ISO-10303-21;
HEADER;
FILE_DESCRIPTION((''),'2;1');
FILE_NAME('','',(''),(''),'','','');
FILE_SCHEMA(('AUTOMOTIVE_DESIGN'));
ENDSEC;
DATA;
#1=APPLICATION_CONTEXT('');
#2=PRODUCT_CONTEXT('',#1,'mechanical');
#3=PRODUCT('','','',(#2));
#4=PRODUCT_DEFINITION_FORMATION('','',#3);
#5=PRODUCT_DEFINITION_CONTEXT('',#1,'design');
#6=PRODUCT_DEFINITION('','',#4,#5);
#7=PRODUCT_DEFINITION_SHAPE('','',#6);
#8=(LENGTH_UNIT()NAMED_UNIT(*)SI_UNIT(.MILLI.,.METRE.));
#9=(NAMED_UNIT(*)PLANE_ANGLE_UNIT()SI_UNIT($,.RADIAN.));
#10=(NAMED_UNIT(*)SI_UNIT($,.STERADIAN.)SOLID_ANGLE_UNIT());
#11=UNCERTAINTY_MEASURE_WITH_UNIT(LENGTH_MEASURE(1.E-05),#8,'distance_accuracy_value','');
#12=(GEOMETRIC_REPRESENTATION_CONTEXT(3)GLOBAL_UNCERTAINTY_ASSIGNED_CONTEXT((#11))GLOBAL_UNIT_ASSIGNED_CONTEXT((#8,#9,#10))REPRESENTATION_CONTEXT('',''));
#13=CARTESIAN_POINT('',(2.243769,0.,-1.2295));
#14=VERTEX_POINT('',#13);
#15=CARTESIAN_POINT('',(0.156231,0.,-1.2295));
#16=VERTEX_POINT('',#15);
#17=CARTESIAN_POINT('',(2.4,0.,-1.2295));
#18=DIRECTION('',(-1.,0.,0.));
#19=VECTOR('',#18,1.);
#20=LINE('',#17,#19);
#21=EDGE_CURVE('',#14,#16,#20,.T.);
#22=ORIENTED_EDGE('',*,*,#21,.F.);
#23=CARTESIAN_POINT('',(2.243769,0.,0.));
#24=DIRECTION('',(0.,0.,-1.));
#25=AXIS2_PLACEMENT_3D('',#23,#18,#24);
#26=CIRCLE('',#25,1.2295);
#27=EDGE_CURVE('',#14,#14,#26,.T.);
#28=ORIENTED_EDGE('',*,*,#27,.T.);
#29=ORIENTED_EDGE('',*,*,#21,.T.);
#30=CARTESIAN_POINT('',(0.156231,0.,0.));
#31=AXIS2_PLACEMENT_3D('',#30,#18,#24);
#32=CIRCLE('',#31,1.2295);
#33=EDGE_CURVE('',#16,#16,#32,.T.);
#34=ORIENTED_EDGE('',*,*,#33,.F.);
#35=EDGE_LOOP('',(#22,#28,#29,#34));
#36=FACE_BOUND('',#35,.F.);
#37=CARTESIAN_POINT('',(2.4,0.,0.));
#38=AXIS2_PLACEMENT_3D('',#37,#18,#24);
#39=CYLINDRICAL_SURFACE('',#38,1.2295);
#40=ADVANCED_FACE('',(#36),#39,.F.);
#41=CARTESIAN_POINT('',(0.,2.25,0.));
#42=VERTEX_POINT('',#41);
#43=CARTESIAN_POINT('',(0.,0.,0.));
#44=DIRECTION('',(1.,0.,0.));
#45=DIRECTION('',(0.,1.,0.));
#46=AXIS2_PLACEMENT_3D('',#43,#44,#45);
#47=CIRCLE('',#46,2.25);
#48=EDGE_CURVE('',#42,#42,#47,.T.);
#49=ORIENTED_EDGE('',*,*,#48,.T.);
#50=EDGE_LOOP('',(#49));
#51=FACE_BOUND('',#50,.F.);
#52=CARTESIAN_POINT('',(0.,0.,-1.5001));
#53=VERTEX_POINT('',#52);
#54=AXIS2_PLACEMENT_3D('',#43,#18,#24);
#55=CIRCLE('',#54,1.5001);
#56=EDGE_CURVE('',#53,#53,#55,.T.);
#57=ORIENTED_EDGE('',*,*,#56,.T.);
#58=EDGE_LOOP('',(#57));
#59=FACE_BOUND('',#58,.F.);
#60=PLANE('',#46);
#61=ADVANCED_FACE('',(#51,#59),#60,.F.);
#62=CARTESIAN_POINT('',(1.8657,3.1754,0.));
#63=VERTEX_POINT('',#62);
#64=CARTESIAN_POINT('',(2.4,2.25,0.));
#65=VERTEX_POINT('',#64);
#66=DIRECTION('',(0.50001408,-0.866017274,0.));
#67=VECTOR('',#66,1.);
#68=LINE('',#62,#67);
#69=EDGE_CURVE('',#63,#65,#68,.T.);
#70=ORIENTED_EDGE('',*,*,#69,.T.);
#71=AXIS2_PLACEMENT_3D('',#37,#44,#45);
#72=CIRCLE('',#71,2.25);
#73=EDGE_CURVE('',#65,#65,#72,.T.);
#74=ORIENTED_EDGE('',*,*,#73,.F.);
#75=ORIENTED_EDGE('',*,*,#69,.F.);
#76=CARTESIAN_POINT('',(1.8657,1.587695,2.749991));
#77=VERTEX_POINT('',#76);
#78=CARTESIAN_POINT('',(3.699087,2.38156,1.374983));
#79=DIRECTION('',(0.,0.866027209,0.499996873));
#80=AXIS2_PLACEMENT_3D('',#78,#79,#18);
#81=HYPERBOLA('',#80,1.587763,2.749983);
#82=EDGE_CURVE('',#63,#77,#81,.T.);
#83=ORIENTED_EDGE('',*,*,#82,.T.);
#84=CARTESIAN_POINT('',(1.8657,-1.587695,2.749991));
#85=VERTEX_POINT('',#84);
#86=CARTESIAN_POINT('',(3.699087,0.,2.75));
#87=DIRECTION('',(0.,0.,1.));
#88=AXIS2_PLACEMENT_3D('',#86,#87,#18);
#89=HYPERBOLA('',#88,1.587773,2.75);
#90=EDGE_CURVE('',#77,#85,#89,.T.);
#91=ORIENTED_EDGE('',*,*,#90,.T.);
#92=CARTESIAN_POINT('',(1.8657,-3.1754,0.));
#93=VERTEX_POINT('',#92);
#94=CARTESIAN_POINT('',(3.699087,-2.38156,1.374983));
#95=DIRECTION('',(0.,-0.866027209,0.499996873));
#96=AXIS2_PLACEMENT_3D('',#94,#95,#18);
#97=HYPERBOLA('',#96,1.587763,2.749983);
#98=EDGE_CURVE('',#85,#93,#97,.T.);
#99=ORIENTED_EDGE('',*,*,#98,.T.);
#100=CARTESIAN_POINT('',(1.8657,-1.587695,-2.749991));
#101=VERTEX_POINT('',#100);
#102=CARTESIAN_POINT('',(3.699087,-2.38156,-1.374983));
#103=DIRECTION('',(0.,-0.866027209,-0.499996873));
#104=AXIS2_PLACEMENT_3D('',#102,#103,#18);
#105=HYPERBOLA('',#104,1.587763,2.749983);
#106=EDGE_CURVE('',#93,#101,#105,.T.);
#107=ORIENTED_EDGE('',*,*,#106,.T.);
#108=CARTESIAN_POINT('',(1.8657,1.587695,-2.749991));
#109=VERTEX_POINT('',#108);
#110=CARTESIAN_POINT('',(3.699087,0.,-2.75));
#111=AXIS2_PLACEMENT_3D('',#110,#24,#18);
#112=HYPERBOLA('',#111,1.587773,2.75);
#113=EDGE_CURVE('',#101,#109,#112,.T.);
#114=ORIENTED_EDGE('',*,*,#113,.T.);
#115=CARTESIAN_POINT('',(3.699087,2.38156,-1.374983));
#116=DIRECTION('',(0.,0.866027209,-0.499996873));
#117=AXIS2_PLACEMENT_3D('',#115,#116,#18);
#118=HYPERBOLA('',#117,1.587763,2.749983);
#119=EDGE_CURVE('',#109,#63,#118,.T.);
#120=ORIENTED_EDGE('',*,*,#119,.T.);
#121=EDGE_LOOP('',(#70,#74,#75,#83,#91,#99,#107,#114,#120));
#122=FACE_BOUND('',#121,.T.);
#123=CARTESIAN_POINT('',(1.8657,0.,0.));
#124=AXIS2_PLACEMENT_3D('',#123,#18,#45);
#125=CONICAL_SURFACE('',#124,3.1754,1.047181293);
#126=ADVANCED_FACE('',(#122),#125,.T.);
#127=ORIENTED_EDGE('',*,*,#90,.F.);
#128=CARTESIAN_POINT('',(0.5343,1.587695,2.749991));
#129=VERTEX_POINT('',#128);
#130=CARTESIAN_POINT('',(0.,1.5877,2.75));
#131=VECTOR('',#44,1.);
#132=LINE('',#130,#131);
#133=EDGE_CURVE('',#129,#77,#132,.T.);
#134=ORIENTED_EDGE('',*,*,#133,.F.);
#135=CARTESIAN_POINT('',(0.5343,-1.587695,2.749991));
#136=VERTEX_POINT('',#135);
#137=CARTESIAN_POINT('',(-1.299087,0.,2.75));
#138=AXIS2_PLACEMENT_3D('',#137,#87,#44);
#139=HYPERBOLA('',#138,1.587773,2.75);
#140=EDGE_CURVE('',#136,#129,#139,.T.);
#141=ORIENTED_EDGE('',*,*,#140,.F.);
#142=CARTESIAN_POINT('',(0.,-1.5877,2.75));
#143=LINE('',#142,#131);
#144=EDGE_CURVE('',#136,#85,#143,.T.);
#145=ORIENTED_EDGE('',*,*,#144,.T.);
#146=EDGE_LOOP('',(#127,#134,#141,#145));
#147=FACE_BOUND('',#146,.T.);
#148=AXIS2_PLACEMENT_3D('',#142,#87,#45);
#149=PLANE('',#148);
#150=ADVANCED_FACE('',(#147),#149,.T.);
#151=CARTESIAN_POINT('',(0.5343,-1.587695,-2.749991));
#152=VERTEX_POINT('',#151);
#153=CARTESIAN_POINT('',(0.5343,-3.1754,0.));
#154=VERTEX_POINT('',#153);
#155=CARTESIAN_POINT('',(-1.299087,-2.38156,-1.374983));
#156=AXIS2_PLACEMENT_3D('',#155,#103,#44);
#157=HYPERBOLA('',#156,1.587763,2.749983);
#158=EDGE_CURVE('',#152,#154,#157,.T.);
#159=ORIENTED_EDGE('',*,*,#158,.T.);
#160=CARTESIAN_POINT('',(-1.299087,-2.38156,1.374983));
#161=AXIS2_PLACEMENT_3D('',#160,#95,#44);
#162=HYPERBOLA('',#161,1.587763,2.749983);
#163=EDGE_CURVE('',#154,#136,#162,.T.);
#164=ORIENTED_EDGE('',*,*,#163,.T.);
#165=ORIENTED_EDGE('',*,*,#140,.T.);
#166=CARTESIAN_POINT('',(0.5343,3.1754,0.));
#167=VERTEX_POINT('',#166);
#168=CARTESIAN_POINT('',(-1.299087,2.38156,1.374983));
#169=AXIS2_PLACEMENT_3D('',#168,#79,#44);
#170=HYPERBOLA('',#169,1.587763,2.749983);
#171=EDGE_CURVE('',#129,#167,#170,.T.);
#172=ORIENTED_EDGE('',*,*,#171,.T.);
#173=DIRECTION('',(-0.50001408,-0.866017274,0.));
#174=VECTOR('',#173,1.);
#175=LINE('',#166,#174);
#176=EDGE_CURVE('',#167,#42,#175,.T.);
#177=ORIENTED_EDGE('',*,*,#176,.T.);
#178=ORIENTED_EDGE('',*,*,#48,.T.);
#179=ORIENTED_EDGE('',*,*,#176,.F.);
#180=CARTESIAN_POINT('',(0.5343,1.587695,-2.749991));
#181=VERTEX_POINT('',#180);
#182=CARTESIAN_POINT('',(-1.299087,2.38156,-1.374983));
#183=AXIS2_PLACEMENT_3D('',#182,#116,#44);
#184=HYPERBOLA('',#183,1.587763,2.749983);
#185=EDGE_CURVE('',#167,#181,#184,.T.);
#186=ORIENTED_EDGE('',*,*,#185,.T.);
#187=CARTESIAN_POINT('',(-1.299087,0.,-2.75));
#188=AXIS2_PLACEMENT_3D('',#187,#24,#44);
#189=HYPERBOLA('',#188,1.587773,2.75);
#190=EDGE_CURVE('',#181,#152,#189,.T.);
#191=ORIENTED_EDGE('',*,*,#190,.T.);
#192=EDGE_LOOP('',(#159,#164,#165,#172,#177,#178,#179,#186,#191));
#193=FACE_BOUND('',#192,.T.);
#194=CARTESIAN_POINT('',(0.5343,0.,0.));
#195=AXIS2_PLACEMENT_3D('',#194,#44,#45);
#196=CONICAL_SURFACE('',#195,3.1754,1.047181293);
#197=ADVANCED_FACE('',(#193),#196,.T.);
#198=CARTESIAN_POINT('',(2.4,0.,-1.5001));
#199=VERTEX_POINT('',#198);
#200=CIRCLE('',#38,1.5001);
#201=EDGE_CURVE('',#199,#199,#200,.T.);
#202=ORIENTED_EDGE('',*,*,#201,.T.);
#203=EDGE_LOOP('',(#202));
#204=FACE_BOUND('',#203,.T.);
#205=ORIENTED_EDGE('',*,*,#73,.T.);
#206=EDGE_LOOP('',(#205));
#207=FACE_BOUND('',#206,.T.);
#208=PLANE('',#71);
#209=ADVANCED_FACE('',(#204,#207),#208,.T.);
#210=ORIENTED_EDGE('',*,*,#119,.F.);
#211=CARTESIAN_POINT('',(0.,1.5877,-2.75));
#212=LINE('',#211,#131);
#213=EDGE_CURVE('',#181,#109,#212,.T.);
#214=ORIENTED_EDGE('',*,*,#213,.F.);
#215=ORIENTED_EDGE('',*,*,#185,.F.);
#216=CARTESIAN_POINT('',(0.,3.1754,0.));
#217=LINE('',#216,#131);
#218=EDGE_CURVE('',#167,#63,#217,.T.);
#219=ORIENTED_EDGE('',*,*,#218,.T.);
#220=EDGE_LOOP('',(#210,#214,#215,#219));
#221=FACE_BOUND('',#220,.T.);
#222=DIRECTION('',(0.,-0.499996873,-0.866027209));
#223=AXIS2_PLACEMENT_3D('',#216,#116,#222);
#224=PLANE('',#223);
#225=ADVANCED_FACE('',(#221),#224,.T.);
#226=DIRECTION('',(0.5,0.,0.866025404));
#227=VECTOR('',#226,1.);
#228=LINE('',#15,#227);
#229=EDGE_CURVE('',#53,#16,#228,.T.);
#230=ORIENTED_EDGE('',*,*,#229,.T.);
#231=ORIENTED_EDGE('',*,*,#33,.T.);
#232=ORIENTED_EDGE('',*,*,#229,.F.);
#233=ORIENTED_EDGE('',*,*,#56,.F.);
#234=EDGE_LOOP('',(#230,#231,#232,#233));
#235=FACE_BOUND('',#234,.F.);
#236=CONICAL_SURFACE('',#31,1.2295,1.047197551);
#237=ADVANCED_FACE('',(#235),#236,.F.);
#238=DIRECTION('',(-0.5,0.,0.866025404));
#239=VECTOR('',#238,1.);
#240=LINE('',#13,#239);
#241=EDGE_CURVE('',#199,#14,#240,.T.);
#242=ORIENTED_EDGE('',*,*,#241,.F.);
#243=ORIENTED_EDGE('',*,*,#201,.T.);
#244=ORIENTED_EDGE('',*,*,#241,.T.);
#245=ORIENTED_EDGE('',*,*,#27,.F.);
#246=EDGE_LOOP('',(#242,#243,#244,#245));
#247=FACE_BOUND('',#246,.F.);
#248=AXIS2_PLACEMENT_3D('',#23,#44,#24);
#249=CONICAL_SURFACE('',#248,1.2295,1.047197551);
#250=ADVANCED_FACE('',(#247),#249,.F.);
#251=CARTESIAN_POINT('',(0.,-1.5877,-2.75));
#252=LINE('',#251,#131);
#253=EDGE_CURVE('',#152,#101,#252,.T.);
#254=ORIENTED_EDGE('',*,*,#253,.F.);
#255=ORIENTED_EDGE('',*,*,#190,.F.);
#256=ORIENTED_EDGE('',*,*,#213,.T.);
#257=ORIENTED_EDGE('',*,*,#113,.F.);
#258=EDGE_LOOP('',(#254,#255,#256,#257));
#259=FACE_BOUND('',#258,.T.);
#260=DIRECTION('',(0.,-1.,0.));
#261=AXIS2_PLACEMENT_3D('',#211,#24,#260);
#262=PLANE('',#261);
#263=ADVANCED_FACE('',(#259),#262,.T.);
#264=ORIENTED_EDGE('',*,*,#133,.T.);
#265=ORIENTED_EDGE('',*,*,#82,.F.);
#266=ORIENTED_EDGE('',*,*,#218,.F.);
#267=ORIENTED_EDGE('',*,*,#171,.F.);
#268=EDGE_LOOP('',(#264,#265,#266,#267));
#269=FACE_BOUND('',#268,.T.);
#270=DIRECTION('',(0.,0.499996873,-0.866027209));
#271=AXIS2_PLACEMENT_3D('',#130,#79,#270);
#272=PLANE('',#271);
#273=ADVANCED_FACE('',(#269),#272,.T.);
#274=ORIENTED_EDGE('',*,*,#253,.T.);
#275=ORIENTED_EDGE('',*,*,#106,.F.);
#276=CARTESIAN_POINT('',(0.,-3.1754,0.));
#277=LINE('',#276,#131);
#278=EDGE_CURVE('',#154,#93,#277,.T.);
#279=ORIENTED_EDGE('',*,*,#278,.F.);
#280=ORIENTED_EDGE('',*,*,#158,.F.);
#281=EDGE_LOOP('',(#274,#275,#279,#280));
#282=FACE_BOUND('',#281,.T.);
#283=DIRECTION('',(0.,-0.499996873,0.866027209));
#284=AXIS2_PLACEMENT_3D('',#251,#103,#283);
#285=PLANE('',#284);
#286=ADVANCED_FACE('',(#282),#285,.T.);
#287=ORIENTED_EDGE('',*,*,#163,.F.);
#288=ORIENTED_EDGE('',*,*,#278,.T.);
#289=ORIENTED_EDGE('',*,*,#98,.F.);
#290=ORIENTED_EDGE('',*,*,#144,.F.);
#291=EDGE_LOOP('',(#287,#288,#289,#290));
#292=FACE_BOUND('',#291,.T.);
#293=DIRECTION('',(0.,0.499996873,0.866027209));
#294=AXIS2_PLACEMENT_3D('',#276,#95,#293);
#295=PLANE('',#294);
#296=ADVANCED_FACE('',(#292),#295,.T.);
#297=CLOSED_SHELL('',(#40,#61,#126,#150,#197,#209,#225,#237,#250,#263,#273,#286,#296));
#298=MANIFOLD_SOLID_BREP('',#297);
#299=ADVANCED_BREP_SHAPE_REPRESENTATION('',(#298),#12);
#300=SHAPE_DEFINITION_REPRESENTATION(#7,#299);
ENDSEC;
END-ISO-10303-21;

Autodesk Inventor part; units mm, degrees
ref_plane "YZ Plane" through (0, 0, 0) normal (1, 0, 0) x (0, 1, 0)
ref_plane "XZ Plane" through (0, 0, 0) normal (0, 1, 0) x (-1, 0, 0)
sketch "Náčrt1" plane through (0, 0, 0) normal (1, 0, 0) x (0, 1, 0)
  line L0 (-3.1754, 0) -> (-1.5877, 2.75)
  line L1 (-1.5877, 2.75) -> (1.5877, 2.75)
  line L2 (1.5877, 2.75) -> (3.1754, 0)
  line L3 (3.1754, 0) -> (1.5877, -2.75)
  line L4 (1.5877, -2.75) -> (-1.5877, -2.75)
  line L5 (-1.5877, -2.75) -> (-3.1754, 0)
  point P0 (0, 0)
  point P1 (0, 0)
  dimension "d0" = 6.3509
extrude "Těleso" add sketch "Náčrt1" along normal blind 2.4
sketch "Náčrt2" plane through (0, 0, 0) normal (0, 0, 1) x (1, 0, 0)
  line L0 (0, 1.5877) -> (0, 3.1754) projected
  line L1 (0, 3.1754) -> (2.4, 3.1754) projected
  line L2 (2.4, 1.5877) -> (2.4, 3.1754) projected
  line L3 (-0.48, 0) -> (2.88, 0) projected
  line L4 (0.5343, 3.1754) -> (0, 2.25)
  line L5 (1.8657, 3.1754) -> (2.4, 2.25)
  dimension "d3" = 30
  dimension "d4" = 30
  dimension "d5" = 4.5
  dimension "d6" = 4.5
revolve "Zkosení1" cut sketch "Náčrt2" angle 360 about axis through (-10, 0, 0) along (1, 0, 0)
sketch "Náčrt3" plane through (2.4, 0, 0) normal (1, 0, 0) x (0, 0, -1)
  arc A0 (-0.625, -1.0825) -> (0.625, -1.0825) centre (0, 0) ccw projected
hole "Závit" at (2.4, 0, 0) direction (-1, 0, 0) diameter 2.459 end through all thread size "M3x0.5" class "6H" standard "ISO Metric profile"
chamfer "Zkosení2" distance 0.2706 angle 30 1 edges at (2.4, 0, 1.2295) measured on face at (2.4, 1.8851, -0.2289)
chamfer "Zkosení3" distance 0.2706 angle 30 1 edges at (0, 0, 1.2295) measured on face at (0, 1.8851, -0.2289)
ref_plane "Work Plane1" through (-6.3375, 0, 0) normal (0, -0.8660254, -0.5) x (1, 0, 0)
equation "\"d0\" = 1.1547 * SW"
equation "\"d1\" = KOH"
equation "\"d8\" = -0.5 * GD1 + 0.5 * NND"
equation "\"d40\" = -0.5 * GD1 + 0.5 * NND"
equation "\"d10\" = -0.5 * GD1 + 0.5 * NND"
equation "\"d41\" = -0.5 * GD1 + 0.5 * NND"
equation "\"d3\" = ANG1"
equation "\"d4\" = ANG2"
equation "\"d5\" = SW0"
equation "\"d6\" = SW01"
equation "\"ANG1\" = 30deg"
equation "\"ANG2\" = 30deg"
equation "\"NND\" = 3"
equation "\"KOH\" = 2.4"
equation "\"SW\" = 5.5"
equation "\"SW0\" = SW01"
equation "\"SW01\" = 4.5"
equation "\"GUL\" = 0.541266 * PTC"
equation "\"THREADDIA\" = 3"
equation "\"TOA\" = 30deg"
equation "\"PTC\" = 0.5"
equation "\"E0\" = 1.155 * SW"
equation "\"GAL\" = 0.541266 * PTC"
equation "\"GD1\" = 2.458734"
properties part number "DIN 934 - M3" material "Ocel, měkká"
